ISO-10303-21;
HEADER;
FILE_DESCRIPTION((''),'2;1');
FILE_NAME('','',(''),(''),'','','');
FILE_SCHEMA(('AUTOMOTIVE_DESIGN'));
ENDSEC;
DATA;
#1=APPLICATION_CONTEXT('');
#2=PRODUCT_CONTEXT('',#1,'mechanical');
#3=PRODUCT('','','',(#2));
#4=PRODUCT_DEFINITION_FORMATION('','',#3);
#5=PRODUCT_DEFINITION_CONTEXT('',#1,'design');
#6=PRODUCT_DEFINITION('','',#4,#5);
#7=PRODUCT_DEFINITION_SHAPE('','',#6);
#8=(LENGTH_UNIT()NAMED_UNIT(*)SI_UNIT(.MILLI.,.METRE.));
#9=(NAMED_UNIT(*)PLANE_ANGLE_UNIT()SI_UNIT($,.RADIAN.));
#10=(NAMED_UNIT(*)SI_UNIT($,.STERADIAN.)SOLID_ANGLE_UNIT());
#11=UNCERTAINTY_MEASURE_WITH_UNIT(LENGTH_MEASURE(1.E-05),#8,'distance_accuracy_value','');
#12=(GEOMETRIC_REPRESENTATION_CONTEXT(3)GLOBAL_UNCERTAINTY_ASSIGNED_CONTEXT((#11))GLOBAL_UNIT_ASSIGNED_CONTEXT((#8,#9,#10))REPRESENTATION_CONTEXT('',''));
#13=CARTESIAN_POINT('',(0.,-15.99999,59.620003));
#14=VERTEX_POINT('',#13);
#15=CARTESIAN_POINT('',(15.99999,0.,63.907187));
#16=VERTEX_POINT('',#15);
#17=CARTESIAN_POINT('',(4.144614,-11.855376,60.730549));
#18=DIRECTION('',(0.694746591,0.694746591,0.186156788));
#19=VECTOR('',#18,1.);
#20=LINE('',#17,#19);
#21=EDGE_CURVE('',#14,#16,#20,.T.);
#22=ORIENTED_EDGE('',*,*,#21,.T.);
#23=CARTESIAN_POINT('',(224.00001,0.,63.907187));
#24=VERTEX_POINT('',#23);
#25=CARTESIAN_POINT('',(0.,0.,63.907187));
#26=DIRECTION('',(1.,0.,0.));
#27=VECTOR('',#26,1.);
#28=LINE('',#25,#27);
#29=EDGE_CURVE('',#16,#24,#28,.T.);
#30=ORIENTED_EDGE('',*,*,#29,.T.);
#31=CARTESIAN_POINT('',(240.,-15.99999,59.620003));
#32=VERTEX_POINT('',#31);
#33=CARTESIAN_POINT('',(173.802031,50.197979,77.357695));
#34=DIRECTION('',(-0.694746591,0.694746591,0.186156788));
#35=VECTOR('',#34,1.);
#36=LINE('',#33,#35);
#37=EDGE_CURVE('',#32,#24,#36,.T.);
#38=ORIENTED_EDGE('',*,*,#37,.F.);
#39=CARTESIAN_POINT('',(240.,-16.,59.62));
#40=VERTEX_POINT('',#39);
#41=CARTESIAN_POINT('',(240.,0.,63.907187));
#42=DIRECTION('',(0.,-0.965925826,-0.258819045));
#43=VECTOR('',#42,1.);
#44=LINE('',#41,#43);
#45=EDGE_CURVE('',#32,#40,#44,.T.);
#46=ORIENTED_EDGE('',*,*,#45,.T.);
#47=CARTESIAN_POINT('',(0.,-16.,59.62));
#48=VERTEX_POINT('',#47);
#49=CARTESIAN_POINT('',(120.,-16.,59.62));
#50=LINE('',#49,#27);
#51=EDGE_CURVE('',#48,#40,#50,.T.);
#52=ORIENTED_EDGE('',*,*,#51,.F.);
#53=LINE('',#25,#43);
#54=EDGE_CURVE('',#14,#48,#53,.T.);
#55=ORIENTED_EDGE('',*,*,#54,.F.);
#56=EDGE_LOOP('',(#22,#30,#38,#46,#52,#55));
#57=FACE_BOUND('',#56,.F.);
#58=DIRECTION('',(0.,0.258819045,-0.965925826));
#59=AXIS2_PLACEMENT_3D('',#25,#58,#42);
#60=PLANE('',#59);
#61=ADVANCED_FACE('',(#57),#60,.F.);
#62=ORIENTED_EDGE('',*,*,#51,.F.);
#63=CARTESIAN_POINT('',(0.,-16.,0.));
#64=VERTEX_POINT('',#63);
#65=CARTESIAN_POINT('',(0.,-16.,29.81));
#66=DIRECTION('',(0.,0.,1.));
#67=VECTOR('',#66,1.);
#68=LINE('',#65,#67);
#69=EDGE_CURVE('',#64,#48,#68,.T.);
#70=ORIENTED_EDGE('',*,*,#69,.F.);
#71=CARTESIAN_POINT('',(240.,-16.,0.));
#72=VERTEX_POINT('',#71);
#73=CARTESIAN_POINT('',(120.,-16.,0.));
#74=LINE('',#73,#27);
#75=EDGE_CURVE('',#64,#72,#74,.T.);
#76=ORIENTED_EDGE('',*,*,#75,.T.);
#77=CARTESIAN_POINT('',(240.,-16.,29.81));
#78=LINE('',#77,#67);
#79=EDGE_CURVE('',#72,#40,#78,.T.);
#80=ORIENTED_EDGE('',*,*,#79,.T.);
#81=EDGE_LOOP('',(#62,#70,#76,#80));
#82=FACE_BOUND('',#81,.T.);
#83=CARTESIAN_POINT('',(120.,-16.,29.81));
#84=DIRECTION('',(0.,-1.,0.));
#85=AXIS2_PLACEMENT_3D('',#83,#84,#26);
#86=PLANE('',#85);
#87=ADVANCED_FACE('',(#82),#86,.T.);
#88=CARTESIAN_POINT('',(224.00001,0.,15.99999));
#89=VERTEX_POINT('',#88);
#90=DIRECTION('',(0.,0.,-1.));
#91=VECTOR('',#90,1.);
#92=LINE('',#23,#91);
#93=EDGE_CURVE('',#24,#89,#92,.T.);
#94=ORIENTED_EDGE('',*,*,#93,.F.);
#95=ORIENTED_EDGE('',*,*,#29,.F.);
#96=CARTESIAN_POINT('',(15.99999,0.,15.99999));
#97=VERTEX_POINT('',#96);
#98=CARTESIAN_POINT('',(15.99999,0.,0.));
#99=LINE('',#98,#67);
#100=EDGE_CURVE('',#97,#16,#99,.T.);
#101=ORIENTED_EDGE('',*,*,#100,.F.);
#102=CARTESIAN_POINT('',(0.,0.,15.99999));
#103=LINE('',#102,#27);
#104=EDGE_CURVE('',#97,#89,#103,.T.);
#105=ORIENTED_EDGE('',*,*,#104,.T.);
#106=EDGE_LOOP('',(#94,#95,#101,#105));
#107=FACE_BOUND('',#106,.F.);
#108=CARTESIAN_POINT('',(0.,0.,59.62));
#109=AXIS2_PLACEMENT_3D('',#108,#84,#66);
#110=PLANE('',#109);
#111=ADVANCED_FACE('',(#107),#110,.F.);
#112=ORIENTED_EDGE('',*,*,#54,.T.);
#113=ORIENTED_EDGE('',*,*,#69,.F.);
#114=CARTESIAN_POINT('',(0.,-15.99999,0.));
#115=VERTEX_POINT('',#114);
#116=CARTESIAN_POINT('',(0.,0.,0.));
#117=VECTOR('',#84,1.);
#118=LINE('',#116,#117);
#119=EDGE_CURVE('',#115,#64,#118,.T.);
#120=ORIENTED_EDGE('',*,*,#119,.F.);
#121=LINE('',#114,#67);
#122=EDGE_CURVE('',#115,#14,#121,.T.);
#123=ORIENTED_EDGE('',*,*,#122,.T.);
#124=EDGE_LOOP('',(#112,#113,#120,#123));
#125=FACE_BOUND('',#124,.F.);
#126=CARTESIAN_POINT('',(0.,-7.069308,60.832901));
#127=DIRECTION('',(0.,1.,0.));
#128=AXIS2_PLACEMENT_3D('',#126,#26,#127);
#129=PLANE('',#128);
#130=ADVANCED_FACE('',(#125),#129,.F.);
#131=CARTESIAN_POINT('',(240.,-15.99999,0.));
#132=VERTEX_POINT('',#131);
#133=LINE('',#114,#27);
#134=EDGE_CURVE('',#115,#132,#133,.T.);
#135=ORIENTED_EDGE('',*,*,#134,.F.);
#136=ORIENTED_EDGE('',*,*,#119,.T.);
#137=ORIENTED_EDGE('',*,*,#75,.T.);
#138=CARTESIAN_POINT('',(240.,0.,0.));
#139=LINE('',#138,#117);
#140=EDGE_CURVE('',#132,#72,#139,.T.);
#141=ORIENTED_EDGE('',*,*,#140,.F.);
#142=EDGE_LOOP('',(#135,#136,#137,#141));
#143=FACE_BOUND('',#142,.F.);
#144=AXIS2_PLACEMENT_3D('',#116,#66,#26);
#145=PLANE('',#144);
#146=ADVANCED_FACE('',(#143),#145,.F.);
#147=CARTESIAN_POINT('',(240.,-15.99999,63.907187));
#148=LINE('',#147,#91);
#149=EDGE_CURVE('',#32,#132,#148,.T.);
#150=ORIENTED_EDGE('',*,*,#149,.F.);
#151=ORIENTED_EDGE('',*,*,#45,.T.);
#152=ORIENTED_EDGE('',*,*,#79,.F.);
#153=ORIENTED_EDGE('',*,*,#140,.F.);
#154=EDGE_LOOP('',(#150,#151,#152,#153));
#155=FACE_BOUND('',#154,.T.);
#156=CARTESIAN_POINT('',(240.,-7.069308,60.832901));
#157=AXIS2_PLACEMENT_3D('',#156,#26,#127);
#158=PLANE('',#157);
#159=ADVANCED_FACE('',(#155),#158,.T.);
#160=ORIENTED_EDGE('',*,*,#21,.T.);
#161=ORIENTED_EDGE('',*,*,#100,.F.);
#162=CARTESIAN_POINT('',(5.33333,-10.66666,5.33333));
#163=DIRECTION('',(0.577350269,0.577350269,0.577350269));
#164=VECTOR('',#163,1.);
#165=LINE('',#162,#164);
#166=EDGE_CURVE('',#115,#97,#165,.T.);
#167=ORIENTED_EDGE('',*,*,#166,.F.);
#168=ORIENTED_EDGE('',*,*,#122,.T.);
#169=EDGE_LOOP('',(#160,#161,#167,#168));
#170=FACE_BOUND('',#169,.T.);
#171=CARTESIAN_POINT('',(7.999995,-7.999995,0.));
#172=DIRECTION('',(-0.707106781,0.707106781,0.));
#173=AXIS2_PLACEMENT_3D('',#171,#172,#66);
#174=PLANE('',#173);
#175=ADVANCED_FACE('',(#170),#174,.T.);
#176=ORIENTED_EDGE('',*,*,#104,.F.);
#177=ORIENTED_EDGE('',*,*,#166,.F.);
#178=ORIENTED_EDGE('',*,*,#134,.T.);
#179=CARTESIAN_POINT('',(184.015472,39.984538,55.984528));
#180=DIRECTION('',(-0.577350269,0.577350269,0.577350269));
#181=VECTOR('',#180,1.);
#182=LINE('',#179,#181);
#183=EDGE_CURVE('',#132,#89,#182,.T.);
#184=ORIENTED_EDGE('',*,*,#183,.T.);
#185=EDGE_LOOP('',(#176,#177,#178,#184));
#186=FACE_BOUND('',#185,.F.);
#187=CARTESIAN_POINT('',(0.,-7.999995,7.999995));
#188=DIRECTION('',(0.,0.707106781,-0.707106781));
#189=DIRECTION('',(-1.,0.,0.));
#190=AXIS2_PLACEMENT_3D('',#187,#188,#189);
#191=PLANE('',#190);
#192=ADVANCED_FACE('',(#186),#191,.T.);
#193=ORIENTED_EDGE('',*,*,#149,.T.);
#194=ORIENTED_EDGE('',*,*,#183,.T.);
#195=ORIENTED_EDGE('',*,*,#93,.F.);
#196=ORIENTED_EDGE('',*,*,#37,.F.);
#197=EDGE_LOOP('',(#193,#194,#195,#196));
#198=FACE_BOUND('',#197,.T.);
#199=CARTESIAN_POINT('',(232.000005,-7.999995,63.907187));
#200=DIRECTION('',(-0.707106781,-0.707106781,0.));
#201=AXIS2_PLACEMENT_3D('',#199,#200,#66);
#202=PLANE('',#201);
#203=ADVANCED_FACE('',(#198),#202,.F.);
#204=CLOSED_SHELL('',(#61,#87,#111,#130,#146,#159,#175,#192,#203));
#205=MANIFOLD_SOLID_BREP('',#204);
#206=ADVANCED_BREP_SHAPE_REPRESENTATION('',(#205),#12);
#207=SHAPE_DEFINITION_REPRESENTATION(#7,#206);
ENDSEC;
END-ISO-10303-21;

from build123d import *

# Parameters (mm, degrees)
F0_W     = 240
F0_H     = 59.62
F1_DEPTH = 16
F3_DEPTH = 240
F4_SIZE  = 15.99999


# Not quite as in the source:
# - a fillet or chamfer is up to 0.001 mm smaller than in the source, because OpenCascade refuses the exact size


with BuildPart() as f1:
    # F0 (on Front) → F1 (new body)
    with BuildSketch(Plane.XZ):
        with Locations((120, 29.81)):
            Rectangle(F0_W, F0_H)
    extrude(amount=F1_DEPTH)

    # F2 (on Right) → F3 (join)
    with BuildSketch(Plane.YZ):
        Polygon((0, 63.9071870789), (-16, 59.62), (0, 59.62), align=None)
    extrude(amount=F3_DEPTH)

    # F4 (size 16 in the source; OpenCascade refuses exactly that, so slightly less here)
    f4_edges = [f1.edges().sort_by_distance(p)[0] for p in [
        (0, 0, 31.953594),
        (120, 0, 0),
        (240, 0, 31.953594),
    ]]
    chamfer(f4_edges, length=F4_SIZE)


solid = f1.part
